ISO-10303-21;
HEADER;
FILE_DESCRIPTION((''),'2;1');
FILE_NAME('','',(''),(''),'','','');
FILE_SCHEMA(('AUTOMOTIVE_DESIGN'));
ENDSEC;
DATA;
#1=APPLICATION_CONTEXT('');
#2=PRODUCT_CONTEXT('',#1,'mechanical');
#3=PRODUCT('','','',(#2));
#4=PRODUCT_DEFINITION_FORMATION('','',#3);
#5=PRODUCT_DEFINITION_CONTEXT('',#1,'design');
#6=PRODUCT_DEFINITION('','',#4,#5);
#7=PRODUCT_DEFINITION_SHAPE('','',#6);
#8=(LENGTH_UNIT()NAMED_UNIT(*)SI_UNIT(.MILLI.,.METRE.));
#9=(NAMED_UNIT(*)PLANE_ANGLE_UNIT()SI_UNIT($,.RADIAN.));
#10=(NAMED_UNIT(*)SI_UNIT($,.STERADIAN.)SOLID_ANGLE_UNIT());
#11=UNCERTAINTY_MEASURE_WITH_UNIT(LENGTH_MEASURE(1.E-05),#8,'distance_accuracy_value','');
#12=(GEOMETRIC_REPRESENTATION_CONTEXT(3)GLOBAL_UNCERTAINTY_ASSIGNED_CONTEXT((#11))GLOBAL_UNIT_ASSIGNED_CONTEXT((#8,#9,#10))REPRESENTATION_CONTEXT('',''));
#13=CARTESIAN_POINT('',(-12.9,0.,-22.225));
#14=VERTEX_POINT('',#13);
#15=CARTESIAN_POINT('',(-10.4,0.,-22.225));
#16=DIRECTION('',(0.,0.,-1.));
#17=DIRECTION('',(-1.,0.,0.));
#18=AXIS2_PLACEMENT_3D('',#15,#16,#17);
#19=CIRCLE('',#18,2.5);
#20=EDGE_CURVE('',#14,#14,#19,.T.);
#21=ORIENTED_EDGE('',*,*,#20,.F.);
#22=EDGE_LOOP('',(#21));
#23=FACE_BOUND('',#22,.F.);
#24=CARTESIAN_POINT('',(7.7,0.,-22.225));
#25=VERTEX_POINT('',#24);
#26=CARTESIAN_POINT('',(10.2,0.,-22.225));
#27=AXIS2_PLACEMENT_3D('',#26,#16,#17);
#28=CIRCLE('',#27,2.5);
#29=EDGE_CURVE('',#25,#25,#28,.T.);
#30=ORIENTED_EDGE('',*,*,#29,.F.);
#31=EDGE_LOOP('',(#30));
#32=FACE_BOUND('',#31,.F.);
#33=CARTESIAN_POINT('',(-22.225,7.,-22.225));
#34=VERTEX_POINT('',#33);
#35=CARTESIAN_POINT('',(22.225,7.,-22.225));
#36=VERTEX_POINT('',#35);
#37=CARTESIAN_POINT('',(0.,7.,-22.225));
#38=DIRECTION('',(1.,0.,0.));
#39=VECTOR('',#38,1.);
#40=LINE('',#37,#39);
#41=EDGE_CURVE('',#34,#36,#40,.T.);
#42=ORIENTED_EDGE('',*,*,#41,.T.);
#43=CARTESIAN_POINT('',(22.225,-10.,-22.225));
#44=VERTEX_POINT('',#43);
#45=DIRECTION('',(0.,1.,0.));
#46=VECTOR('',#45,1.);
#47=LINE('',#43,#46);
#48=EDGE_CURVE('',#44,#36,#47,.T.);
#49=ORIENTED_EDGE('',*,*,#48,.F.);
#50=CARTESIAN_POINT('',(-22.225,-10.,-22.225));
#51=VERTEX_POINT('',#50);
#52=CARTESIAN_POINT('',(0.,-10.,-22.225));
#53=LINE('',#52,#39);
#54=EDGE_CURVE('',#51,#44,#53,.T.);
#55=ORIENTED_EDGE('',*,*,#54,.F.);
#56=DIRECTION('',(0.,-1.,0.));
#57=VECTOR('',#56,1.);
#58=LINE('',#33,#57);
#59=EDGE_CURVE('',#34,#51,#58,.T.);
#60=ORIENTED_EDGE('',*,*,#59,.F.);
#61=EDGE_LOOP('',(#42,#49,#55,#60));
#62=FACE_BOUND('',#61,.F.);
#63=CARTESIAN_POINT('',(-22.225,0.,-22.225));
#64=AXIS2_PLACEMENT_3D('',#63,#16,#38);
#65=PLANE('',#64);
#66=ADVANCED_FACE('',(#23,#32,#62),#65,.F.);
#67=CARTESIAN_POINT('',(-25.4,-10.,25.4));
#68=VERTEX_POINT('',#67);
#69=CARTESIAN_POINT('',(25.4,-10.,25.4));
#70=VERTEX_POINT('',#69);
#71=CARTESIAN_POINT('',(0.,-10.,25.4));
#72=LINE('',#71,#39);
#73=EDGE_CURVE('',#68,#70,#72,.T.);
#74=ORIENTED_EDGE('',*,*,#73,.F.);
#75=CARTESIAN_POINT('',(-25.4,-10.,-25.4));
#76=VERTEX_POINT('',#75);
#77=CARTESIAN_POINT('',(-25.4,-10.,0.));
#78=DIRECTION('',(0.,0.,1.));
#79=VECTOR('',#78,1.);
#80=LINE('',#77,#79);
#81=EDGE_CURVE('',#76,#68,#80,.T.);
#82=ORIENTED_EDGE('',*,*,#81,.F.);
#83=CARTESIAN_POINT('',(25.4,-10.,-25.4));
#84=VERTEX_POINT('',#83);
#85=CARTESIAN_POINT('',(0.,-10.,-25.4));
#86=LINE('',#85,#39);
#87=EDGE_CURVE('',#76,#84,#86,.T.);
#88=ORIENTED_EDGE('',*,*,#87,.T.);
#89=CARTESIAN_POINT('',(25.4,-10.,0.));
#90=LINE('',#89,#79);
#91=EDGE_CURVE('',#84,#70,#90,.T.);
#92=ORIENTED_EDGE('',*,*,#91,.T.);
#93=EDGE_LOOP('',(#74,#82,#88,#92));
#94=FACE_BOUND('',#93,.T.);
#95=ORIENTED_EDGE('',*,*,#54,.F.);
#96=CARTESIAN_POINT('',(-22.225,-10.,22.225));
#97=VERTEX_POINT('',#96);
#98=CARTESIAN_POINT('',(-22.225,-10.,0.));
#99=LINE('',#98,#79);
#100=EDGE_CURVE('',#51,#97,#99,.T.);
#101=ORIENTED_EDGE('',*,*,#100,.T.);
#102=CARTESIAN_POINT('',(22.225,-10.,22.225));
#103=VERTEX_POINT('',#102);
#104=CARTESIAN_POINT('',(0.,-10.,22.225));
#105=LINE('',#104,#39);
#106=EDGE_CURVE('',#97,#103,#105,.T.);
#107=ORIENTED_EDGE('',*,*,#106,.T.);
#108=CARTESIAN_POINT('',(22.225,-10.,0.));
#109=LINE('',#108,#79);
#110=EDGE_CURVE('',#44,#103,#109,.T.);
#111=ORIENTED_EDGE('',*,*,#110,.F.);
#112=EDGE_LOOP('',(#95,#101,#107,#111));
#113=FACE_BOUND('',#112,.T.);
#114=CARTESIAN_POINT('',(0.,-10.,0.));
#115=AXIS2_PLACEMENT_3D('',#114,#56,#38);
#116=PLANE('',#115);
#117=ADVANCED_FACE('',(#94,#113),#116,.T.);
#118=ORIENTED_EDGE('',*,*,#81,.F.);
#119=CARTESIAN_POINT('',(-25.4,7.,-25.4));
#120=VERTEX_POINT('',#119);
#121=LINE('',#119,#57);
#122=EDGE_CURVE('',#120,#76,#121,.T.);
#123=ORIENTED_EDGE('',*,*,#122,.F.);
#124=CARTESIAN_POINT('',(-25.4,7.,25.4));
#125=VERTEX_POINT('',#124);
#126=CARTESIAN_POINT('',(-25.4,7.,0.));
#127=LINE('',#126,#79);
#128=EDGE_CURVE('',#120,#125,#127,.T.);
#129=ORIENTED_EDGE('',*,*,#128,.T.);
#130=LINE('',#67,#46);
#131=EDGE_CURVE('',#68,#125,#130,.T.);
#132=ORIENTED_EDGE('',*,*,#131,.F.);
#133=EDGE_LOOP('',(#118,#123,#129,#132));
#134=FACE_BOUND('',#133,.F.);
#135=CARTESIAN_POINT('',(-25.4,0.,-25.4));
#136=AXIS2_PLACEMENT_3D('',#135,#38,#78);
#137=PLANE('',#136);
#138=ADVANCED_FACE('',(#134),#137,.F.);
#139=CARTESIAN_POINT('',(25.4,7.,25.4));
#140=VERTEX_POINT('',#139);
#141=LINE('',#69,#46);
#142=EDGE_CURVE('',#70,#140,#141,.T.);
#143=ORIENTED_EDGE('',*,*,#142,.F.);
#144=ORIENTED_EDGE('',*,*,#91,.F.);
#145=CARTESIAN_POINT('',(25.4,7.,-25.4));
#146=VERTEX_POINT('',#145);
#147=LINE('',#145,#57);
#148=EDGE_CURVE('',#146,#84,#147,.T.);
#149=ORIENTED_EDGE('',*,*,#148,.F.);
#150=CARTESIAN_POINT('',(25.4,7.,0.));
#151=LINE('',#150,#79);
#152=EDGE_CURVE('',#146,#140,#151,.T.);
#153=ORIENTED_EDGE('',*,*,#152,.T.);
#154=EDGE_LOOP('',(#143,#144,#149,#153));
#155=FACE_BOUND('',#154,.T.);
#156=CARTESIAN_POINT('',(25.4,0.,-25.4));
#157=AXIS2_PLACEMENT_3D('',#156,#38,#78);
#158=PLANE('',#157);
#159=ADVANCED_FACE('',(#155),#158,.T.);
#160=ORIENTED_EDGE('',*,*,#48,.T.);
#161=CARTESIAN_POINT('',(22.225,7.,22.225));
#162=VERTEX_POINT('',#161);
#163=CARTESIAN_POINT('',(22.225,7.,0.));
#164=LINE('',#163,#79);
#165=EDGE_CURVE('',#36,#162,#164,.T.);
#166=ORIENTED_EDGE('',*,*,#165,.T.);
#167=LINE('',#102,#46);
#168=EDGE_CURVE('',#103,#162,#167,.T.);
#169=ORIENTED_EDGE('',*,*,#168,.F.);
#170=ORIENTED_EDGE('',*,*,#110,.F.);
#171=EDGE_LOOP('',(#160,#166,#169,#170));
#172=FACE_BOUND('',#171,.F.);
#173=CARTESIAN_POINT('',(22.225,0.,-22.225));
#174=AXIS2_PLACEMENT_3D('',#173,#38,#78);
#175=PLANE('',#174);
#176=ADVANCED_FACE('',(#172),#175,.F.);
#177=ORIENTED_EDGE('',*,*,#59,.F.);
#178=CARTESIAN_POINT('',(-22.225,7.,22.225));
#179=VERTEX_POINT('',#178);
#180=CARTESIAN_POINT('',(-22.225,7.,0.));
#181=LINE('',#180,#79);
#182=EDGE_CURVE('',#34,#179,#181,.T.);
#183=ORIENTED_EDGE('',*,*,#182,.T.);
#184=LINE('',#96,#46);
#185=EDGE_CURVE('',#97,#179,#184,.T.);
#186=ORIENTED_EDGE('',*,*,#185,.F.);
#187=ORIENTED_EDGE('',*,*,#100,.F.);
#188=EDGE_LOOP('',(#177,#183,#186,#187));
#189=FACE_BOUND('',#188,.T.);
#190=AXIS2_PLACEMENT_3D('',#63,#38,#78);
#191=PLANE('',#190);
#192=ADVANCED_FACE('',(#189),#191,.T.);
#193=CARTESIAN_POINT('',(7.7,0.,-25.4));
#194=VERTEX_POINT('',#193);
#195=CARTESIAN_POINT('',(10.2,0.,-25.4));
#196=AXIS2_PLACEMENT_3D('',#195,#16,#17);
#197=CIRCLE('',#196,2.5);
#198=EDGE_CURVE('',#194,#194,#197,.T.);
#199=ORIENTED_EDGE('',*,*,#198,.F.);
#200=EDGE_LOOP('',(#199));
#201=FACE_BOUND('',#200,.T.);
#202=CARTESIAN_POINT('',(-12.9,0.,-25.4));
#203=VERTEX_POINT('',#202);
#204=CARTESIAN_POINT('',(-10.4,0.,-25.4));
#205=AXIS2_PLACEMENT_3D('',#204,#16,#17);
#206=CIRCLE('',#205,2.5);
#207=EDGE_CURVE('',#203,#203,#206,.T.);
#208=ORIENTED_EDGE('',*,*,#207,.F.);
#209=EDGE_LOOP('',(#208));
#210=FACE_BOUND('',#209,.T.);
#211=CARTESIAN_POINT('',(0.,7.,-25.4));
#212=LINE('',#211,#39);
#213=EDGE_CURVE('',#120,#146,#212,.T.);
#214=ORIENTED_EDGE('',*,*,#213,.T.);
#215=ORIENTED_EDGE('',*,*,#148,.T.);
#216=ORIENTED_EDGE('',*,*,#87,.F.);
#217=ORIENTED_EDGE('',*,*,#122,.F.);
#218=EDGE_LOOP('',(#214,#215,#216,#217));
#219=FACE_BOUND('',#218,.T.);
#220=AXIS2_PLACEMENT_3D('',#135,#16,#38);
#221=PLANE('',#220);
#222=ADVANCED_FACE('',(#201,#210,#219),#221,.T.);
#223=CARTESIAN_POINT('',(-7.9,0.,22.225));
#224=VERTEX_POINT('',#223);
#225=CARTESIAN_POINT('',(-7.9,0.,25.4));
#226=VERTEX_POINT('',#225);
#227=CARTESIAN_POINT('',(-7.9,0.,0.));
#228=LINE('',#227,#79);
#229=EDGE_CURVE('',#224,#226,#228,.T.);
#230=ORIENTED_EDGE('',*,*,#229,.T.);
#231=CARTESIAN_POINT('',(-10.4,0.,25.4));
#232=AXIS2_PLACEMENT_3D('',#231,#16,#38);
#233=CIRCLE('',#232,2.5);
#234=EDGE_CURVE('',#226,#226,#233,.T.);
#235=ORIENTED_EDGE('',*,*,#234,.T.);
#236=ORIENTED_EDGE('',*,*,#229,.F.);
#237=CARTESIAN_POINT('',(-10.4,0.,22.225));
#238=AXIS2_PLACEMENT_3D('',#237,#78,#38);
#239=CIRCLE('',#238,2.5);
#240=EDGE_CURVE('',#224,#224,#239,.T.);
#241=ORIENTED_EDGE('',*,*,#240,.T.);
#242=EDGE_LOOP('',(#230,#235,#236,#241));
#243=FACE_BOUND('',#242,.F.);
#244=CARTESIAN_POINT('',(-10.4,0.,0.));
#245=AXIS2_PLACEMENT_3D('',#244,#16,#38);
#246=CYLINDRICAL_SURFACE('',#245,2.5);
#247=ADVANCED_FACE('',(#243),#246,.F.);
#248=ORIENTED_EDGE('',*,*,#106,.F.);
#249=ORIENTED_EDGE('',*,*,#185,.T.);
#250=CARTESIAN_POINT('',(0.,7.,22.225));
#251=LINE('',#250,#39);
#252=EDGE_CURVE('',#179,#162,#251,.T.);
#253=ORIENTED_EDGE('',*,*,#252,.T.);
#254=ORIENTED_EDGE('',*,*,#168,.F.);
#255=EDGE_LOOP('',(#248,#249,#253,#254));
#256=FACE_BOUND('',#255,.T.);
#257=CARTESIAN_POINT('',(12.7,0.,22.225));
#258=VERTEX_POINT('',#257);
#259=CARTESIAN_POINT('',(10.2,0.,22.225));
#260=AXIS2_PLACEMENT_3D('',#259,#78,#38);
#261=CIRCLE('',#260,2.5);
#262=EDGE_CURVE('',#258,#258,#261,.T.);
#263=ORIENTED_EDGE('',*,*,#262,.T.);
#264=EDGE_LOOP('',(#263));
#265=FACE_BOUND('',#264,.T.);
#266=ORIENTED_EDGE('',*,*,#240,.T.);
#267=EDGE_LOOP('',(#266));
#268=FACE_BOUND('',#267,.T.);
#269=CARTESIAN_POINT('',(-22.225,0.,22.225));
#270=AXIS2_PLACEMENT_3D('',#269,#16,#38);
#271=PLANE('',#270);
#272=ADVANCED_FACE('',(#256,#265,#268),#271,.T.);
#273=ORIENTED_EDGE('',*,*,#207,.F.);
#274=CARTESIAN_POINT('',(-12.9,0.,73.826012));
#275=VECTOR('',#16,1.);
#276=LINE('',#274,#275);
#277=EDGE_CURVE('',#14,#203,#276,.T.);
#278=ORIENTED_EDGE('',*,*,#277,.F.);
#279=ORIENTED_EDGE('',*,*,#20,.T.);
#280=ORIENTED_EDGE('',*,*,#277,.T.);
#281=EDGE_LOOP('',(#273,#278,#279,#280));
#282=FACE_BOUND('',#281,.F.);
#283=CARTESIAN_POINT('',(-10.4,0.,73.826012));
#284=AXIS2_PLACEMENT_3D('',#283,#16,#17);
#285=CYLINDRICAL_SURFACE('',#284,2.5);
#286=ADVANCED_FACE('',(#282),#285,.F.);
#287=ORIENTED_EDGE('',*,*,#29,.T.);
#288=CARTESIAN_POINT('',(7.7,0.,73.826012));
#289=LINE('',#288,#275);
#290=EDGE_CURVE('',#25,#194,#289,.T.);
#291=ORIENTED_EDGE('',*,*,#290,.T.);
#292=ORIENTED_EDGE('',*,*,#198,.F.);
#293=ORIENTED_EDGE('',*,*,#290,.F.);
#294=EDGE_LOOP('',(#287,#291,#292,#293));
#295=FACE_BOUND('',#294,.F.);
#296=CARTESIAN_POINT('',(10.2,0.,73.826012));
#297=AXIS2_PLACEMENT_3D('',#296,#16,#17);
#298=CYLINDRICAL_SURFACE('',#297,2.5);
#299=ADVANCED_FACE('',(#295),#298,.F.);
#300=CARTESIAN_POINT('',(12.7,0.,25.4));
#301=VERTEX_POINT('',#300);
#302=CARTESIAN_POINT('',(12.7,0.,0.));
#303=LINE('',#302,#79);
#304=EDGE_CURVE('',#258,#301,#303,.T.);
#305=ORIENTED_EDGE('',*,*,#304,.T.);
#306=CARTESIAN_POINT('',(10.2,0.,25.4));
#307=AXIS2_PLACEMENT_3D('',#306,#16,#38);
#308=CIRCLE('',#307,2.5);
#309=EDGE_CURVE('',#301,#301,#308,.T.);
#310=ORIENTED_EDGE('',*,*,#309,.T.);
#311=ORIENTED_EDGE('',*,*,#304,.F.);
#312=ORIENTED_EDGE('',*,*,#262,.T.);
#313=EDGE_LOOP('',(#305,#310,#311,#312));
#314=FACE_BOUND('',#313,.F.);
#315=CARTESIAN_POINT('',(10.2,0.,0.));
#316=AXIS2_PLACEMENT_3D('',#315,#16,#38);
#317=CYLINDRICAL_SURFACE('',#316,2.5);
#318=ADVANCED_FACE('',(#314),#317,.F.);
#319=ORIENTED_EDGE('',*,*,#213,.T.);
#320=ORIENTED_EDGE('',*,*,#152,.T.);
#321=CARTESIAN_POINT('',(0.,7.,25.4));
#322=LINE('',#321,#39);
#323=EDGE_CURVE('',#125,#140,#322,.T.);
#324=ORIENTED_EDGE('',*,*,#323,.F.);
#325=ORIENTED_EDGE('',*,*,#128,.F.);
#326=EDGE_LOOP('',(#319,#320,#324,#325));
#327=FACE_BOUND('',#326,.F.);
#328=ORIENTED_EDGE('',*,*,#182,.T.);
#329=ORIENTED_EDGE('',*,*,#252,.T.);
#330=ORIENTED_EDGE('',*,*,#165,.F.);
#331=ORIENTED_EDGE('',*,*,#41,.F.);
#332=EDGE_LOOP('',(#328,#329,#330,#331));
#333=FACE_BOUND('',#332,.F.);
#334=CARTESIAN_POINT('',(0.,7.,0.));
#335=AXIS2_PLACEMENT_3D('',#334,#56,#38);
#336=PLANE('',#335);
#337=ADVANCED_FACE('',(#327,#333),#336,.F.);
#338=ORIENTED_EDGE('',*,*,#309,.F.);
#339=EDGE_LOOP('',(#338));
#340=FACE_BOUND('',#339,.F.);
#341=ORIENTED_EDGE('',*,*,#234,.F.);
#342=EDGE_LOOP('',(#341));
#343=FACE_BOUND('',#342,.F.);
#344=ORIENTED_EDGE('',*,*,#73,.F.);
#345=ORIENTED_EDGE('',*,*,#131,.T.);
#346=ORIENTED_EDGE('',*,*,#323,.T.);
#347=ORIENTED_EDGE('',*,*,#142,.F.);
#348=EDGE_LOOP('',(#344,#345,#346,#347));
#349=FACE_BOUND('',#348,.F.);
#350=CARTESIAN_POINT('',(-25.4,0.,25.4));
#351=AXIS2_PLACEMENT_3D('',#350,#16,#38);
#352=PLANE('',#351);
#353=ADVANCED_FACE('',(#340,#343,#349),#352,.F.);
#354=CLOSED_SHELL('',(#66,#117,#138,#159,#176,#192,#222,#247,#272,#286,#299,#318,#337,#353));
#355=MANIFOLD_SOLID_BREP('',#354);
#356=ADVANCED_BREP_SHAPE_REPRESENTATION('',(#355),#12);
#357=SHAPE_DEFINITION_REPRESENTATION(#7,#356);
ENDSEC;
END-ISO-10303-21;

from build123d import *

# Parameters (mm, degrees)
F0_W          = 50.8
F0_H          = 50.8
F0_W_2        = 44.45
F0_H_2        = 44.45
F1_DEPTH      = 10
F1_DEPTH_BACK = 7
F3_D          = 5
F3_DEPTH      = 25.401
F4_D          = 5


# Not quite as in the source:
# - a feature names something its author has since deleted; it is built from what else it names


with BuildPart() as f1:
    # F0 (on Front) → F1 (new body, two sides)
    with BuildSketch(Plane.XZ) as f1_sk:
        Rectangle(F0_W, F0_H)
        Rectangle(F0_W_2, F0_H_2, mode=Mode.SUBTRACT)
    extrude(amount=F1_DEPTH)
    extrude(f1_sk.sketch, amount=-F1_DEPTH_BACK)

    # F3 (through all, one way)
    with BuildSketch(Plane(origin=(0, 0, 0), x_dir=(1, 0, 0), z_dir=(0, 0, -1))):
        with Locations((-10.4, 0), (10.2, 0)):
            Circle(F3_D / 2)
    extrude(amount=-F3_DEPTH, mode=Mode.SUBTRACT)

    # F4 (through all)
    with Locations(Plane.XY):
        with Locations((-10.4, 0), (10.2, 0)):
            Hole(F4_D / 2)


solid = f1.part
